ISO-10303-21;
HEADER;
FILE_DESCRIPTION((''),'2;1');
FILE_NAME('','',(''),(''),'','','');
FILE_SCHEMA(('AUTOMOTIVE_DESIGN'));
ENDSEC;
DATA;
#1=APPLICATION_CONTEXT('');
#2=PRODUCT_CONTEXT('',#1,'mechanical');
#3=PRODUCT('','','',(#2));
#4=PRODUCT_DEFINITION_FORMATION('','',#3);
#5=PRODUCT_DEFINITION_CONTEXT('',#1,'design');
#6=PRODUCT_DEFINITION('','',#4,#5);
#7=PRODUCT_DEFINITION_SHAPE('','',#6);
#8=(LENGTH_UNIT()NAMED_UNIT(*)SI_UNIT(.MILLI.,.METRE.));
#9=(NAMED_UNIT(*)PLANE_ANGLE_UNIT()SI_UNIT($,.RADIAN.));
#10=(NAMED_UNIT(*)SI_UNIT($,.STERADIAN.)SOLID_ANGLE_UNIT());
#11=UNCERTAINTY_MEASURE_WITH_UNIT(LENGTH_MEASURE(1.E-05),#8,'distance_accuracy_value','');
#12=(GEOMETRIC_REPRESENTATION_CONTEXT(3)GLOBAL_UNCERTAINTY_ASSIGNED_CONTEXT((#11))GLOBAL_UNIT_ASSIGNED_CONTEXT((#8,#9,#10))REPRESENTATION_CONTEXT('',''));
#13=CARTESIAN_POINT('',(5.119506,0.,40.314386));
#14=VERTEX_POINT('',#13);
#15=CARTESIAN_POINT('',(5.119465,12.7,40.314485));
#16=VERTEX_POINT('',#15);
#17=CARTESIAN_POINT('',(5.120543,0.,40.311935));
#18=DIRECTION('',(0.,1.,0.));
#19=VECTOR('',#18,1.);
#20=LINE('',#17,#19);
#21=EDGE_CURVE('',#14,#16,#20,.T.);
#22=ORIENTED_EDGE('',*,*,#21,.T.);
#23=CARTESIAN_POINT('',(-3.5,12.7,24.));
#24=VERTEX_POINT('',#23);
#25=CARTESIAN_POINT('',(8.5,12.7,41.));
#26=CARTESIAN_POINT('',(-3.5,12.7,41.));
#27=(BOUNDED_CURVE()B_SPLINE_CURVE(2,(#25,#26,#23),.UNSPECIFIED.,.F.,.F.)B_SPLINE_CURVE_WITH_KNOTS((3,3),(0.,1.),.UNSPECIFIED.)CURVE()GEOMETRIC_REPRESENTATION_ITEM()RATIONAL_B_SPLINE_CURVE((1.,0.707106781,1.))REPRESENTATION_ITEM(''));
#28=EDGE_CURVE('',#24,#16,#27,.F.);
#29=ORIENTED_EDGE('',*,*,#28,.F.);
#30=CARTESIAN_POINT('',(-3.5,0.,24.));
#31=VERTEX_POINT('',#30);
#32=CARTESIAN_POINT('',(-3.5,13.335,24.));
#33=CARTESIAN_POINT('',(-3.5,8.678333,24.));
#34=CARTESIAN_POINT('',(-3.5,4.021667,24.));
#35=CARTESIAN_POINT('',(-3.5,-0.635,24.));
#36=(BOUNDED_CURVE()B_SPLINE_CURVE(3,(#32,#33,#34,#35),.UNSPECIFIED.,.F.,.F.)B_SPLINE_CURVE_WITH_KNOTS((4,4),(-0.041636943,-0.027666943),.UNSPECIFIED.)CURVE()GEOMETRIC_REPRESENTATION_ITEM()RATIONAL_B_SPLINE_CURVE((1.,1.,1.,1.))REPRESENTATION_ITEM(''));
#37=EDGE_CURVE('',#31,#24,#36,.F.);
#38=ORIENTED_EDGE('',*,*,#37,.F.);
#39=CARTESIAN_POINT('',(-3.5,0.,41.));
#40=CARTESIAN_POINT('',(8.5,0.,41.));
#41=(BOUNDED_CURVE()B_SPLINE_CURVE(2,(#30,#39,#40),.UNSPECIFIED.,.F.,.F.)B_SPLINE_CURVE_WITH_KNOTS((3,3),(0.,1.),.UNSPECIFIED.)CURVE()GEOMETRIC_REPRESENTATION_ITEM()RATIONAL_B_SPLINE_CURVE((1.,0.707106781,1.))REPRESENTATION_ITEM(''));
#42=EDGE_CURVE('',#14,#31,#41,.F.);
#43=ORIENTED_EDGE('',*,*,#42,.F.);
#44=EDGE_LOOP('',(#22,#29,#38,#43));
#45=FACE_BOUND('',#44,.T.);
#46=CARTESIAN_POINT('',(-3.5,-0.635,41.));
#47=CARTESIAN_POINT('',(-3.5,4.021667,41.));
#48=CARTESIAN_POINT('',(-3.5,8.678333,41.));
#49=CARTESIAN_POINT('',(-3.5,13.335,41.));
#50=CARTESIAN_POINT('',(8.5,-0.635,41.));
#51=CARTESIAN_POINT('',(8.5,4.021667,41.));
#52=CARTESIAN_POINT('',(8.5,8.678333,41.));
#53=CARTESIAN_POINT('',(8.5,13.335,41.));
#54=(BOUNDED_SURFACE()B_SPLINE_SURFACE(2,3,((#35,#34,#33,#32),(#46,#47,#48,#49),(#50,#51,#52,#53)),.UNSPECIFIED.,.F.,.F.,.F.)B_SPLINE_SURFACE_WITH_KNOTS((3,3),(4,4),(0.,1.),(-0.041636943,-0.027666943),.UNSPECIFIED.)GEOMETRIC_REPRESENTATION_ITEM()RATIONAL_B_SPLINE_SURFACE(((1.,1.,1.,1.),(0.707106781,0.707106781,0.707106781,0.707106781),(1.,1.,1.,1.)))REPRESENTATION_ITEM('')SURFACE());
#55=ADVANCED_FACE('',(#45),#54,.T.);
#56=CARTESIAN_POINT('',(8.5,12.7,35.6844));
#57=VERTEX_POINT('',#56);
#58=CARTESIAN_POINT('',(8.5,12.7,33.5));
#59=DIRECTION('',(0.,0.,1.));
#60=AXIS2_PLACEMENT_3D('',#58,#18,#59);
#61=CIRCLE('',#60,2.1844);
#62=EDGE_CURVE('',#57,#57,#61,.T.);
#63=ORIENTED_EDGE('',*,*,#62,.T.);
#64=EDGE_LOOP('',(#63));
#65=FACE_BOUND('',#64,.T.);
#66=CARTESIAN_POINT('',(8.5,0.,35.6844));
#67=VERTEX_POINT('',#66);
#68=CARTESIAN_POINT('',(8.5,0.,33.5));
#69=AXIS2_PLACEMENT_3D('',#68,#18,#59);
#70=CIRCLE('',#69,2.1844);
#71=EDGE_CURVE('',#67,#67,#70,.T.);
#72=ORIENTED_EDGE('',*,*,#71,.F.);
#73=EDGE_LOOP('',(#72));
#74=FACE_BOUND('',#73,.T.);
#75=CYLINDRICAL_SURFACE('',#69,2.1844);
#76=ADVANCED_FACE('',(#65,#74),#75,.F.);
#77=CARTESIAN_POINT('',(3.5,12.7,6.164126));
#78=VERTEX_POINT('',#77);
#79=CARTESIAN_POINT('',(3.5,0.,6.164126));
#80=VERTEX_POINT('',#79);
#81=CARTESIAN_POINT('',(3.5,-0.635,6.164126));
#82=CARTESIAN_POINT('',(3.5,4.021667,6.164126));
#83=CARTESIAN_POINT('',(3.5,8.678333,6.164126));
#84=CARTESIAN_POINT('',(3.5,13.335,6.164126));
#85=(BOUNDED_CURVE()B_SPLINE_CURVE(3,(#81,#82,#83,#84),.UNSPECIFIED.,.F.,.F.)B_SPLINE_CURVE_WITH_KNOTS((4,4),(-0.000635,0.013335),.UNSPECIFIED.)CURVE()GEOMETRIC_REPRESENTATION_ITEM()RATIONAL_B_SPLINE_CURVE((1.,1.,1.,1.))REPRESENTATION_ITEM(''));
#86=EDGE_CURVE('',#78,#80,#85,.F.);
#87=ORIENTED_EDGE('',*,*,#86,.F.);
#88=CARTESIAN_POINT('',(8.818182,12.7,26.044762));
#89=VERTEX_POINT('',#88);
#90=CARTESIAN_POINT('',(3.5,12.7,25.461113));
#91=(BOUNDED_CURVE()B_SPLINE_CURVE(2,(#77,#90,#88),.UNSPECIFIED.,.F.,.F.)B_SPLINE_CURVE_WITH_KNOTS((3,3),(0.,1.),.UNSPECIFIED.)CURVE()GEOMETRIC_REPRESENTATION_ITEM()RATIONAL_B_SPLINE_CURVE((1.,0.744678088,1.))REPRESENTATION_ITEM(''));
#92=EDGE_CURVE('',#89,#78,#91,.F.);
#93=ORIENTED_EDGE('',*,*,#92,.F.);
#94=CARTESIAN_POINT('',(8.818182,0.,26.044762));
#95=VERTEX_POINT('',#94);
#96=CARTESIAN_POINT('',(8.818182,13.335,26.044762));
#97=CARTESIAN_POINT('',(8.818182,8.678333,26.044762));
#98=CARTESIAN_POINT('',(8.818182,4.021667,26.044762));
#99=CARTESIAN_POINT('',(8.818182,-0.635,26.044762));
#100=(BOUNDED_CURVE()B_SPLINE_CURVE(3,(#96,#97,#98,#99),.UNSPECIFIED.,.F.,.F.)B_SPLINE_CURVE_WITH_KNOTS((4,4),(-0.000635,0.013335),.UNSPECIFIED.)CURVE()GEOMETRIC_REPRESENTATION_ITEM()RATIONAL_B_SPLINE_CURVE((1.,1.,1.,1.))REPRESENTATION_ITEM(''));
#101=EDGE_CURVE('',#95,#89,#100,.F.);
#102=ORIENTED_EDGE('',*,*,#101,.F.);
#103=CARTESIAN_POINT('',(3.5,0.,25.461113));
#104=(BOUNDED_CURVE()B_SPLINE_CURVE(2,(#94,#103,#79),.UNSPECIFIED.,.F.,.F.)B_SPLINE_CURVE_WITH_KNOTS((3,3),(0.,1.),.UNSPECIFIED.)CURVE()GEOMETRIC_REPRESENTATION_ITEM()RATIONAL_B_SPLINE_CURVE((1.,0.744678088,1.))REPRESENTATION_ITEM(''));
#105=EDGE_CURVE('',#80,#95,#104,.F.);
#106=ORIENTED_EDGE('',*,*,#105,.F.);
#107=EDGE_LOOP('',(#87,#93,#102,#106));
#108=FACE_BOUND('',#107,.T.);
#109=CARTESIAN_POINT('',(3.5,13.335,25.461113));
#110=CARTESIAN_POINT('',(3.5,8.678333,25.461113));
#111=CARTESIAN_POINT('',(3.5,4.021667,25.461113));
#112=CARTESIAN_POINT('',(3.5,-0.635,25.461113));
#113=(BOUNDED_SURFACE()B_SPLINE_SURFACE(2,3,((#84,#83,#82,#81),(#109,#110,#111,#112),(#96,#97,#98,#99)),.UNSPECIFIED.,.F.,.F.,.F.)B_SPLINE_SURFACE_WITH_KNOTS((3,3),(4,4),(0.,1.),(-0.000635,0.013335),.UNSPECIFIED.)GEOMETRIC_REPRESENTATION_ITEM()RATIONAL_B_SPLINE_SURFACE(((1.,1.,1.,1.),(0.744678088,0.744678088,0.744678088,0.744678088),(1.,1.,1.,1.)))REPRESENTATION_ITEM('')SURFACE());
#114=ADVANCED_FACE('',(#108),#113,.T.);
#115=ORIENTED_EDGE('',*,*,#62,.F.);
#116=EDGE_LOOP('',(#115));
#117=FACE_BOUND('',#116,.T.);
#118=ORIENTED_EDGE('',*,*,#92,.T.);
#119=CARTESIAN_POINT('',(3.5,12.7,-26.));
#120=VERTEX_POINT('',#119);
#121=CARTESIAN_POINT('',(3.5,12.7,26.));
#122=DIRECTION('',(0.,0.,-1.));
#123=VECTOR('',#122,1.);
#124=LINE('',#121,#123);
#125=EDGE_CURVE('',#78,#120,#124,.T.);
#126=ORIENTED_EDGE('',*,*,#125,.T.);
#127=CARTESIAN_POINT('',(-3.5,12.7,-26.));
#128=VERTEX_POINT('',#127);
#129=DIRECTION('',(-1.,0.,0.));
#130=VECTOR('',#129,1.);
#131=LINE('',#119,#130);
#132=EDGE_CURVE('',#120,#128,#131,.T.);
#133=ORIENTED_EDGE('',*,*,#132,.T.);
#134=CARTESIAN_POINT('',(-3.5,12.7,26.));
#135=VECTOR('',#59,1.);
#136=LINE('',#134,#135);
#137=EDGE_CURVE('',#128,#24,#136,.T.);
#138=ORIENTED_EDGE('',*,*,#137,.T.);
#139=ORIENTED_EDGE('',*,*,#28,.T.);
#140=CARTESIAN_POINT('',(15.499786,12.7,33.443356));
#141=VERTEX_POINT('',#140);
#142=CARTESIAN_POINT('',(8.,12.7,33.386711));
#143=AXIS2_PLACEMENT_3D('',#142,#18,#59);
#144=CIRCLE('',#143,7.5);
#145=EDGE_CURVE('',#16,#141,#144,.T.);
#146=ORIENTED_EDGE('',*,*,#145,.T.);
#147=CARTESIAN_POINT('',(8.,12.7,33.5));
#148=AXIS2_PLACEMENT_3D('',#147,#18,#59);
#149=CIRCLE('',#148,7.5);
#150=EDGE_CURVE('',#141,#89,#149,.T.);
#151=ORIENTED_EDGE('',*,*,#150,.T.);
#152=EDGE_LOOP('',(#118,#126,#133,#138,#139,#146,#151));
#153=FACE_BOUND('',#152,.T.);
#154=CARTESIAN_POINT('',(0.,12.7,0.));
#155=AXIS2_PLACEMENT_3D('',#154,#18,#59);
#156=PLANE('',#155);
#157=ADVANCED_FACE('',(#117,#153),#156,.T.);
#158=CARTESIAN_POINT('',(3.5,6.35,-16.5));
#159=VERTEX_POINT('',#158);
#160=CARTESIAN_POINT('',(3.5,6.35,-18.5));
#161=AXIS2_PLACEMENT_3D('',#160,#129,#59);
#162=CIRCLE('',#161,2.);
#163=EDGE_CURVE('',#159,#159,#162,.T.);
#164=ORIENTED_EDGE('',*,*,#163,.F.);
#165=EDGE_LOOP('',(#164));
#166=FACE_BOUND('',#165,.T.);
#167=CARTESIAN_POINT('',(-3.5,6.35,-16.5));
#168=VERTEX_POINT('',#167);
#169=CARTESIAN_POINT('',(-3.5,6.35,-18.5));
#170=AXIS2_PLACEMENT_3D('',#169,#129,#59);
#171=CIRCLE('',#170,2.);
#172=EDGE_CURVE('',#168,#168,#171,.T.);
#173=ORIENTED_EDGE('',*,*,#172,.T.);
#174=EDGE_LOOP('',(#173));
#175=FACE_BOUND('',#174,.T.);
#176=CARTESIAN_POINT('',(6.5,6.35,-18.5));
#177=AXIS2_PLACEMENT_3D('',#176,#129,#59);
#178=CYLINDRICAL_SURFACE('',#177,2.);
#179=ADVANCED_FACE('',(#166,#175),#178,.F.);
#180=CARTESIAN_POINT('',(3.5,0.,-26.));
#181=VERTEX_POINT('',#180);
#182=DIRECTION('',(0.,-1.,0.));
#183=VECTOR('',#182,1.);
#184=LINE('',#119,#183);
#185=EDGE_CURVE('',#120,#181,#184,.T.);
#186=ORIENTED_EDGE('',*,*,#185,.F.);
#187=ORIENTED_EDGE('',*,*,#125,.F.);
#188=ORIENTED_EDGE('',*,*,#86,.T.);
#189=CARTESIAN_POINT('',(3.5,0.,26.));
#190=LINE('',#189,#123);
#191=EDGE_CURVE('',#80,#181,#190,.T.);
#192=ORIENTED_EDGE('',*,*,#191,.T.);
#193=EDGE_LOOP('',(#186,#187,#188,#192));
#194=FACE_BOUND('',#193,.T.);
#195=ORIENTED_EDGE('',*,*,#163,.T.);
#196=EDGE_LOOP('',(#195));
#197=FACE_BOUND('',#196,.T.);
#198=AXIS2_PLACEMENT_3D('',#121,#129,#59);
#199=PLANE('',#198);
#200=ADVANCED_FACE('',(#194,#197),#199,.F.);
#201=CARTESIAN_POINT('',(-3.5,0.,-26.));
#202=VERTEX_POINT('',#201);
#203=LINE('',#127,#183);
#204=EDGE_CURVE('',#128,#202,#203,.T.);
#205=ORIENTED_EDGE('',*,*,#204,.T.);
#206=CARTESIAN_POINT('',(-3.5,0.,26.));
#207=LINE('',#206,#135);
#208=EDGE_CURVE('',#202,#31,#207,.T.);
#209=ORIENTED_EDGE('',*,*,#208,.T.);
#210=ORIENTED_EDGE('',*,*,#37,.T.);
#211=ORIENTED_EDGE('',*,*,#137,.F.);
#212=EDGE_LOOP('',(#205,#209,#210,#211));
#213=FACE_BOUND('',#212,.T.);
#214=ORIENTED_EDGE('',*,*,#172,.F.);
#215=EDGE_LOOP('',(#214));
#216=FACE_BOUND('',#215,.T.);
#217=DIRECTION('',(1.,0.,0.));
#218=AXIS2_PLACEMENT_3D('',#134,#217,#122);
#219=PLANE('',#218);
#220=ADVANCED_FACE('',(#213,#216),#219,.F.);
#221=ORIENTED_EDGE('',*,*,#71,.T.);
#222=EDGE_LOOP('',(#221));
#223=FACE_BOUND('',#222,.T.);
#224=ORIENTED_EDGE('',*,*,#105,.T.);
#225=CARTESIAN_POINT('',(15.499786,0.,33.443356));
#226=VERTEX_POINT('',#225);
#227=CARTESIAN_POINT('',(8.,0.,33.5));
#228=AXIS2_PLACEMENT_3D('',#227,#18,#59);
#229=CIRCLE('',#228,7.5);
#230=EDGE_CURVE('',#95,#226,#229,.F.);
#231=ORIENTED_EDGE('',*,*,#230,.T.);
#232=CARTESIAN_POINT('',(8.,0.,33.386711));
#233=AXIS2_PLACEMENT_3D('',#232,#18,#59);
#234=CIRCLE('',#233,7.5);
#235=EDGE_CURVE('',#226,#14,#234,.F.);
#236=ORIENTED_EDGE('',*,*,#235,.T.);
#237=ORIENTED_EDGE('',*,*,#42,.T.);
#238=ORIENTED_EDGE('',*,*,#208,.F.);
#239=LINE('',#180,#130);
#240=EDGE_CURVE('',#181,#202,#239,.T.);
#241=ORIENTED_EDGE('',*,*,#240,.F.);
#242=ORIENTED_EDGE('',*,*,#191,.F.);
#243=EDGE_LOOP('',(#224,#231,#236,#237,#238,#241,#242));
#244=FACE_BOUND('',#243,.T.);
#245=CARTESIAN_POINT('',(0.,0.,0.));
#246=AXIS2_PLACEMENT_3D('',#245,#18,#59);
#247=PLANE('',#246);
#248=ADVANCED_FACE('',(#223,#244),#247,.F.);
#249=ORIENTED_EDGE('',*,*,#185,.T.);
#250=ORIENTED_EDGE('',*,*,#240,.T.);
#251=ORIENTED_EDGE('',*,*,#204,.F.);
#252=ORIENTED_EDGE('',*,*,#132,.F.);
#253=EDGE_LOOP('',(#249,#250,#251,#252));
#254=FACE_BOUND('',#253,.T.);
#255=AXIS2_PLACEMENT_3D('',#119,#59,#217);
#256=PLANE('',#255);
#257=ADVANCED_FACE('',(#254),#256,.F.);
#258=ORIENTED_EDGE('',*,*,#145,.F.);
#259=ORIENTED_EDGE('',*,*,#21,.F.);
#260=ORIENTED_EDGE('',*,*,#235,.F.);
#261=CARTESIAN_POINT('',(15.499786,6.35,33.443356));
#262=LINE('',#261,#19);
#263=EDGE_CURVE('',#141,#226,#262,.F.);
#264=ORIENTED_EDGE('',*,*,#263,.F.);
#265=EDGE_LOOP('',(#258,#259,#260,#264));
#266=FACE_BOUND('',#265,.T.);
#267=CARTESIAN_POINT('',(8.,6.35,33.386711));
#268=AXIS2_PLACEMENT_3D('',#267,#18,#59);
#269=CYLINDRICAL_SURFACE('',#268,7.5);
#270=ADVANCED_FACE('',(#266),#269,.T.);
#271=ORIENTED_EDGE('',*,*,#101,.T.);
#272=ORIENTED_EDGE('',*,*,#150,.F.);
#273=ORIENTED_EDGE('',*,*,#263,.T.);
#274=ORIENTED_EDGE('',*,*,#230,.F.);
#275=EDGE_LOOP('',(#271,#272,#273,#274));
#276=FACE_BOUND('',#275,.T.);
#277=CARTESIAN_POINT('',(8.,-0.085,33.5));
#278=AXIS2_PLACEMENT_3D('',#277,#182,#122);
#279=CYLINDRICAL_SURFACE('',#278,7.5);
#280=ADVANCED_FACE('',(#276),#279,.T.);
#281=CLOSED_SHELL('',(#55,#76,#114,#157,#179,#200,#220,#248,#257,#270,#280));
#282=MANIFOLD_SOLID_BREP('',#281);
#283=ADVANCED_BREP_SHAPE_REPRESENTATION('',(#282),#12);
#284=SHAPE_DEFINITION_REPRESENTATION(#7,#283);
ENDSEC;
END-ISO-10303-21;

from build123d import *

# Parameters (mm, degrees)
SKETCH1_W               = 7
SKETCH1_H               = 52
BOSS_EXTRUDE1_DEPTH     = 12.7
SKETCH2_R               = 2
CUT_EXTRUDE1_DEPTH      = 10
SKETCH3_W               = 24
SKETCH3_H               = 15
BOSS_EXTRUDE2_DEPTH     = 12.7
CUT_EXTRUDE2_DEPTH      = 48.566164445
CUT_EXTRUDE2_DEPTH_BACK = 48.566164445
SKETCH4_R               = 2.1844
FILLET1_SIZE            = 17
FILLET1_SIZE_2          = 12
CUT_EXTRUDE3_DEPTH      = 48.566164601
CUT_EXTRUDE3_DEPTH_BACK = 48.566164601
SKETCH5_W               = 5
SKETCH5_H               = 15
FILLET2_R               = 7.5
FILLET3_DEPTH           = 12.7


with BuildPart() as part:
    # Sketch1 → Boss-Extrude1 (new body)
    with BuildSketch(Plane(origin=(0, 0, 0), x_dir=(1, 0, 0), z_dir=(0, 1, 0))):
        Rectangle(SKETCH1_W, SKETCH1_H)
    extrude(amount=BOSS_EXTRUDE1_DEPTH)

    # Sketch2 → Cut-Extrude1 (cut)
    with BuildSketch(Plane.ZY.offset(3.5)):
        with Locations((-18.5, 6.35)):
            Circle(SKETCH2_R)
    extrude(amount=-CUT_EXTRUDE1_DEPTH, mode=Mode.SUBTRACT)

    # Sketch3 → Boss-Extrude2 (add)
    with BuildSketch(Plane.XZ):
        with Locations((8.5, 33.5)):
            Rectangle(SKETCH3_W, SKETCH3_H)
    extrude(amount=-BOSS_EXTRUDE2_DEPTH)

    # Sketch4 → Cut-Extrude2 (cut, two sides: drawn at the far end of the back side and taken through both)
    with BuildSketch(Plane(origin=(0, 12.7, 0), x_dir=(1, 0, 0), z_dir=(0, 1, 0)).offset(-CUT_EXTRUDE2_DEPTH_BACK)):
        with Locations(Location((8.5, -33.5, 0), (0, 0, 270))):
            Circle(SKETCH4_R)
    extrude(amount=CUT_EXTRUDE2_DEPTH + CUT_EXTRUDE2_DEPTH_BACK, mode=Mode.SUBTRACT)

    # Fillet1
    # a fillet whose section is not a circle: 17, 12 mm, written as the material it takes off along each edge
    with BuildSketch(Plane(origin=(-3.5, -42.5, 41), x_dir=(0, 0, -1), z_dir=(0, 1, 0))) as fillet1_piece_1:
        with BuildLine():
            Bezier((FILLET1_SIZE, 0), (0, 0), (0, -FILLET1_SIZE_2), weights=[1, 0.707106781, 1])
            Line((0, -FILLET1_SIZE_2), (0, 0))
            Line((0, 0), (FILLET1_SIZE, 0))
        make_face()
    extrude(amount=97.7, mode=Mode.SUBTRACT)

    # Sketch5 → Cut-Extrude3 (cut, two sides: drawn at the far end of the back side and taken through both)
    with BuildSketch(Plane(origin=(0, 12.7, 0), x_dir=(1, 0, 0), z_dir=(0, 1, 0)).offset(-CUT_EXTRUDE3_DEPTH_BACK)):
        with Locations((18, -33.5)):
            Rectangle(SKETCH5_W, SKETCH5_H)
    extrude(amount=CUT_EXTRUDE3_DEPTH + CUT_EXTRUDE3_DEPTH_BACK, mode=Mode.SUBTRACT)

    # Fillet2
    # the kernel refuses this fillet: 7.5 mm, written as the material it takes off along each edge
    with BuildSketch(Plane(origin=(15.5, -18.75, 26), x_dir=(-1, 0, 0), z_dir=(0, 1, 0))) as fillet2_piece_1:
        with BuildLine():
            CenterArc((FILLET2_R, FILLET2_R), FILLET2_R, 180, 90)
            Line((0, FILLET2_R), (0, 0))
            Line((0, 0), (FILLET2_R, 0))
        make_face()
    extrude(amount=50.2, mode=Mode.SUBTRACT)
    with BuildSketch(Plane(origin=(15.5, -26.005596716, 41), x_dir=(-0.9978099648287924, 0, -0.06614585465744831), z_dir=(0, 1, 0))) as fillet2_piece_2:
        with BuildLine():
            CenterArc((7.98716223, -7.10052151), FILLET2_R, 71.215463445, 112.577183941)
            Line((0.503587494, -7.59661542), (-0.24476998, -7.646224811))
            Line((-0.24476998, -7.646224811), (-0.748357474, -0.049609391))
            Line((-0.748357474, -0.049609391), (-0.049609391, 0.748357474))
            ThreePointArc((-0.049609391, 0.748357474), (6.935060363, 1.211378456), (10.643746332, 0.710052151))
            Line((10.643746332, 0.710052151), (10.402238686, 0))
        make_face()
    extrude(amount=64.711193432, mode=Mode.SUBTRACT)

    # Fillet3: read off the stored shape, not the designer's step
    # Fillet3 outline → Fillet3 (add)
    with BuildSketch(Plane(origin=(0, 0, 0), x_dir=(1, 0, 0), z_dir=(0, 1, 0))):
        with BuildLine():
            add(Edge.make_bspline(
                [(3.5, -6.164126134), (3.5, -25.461113038), (8.818181818, -26.044761673)],
                knots=[0, 0, 0, 1, 1, 1], degree=2, weights=[1, 0.744678088, 1]))
            Line((3.5, -6.164126134), (3.5, -26))
            Line((3.5, -26), (8, -26))
            ThreePointArc((8, -26), (8.409702665, -26.011198779), (8.818181818, -26.044761673))
        make_face()
    extrude(amount=FILLET3_DEPTH)


solid = part.part
